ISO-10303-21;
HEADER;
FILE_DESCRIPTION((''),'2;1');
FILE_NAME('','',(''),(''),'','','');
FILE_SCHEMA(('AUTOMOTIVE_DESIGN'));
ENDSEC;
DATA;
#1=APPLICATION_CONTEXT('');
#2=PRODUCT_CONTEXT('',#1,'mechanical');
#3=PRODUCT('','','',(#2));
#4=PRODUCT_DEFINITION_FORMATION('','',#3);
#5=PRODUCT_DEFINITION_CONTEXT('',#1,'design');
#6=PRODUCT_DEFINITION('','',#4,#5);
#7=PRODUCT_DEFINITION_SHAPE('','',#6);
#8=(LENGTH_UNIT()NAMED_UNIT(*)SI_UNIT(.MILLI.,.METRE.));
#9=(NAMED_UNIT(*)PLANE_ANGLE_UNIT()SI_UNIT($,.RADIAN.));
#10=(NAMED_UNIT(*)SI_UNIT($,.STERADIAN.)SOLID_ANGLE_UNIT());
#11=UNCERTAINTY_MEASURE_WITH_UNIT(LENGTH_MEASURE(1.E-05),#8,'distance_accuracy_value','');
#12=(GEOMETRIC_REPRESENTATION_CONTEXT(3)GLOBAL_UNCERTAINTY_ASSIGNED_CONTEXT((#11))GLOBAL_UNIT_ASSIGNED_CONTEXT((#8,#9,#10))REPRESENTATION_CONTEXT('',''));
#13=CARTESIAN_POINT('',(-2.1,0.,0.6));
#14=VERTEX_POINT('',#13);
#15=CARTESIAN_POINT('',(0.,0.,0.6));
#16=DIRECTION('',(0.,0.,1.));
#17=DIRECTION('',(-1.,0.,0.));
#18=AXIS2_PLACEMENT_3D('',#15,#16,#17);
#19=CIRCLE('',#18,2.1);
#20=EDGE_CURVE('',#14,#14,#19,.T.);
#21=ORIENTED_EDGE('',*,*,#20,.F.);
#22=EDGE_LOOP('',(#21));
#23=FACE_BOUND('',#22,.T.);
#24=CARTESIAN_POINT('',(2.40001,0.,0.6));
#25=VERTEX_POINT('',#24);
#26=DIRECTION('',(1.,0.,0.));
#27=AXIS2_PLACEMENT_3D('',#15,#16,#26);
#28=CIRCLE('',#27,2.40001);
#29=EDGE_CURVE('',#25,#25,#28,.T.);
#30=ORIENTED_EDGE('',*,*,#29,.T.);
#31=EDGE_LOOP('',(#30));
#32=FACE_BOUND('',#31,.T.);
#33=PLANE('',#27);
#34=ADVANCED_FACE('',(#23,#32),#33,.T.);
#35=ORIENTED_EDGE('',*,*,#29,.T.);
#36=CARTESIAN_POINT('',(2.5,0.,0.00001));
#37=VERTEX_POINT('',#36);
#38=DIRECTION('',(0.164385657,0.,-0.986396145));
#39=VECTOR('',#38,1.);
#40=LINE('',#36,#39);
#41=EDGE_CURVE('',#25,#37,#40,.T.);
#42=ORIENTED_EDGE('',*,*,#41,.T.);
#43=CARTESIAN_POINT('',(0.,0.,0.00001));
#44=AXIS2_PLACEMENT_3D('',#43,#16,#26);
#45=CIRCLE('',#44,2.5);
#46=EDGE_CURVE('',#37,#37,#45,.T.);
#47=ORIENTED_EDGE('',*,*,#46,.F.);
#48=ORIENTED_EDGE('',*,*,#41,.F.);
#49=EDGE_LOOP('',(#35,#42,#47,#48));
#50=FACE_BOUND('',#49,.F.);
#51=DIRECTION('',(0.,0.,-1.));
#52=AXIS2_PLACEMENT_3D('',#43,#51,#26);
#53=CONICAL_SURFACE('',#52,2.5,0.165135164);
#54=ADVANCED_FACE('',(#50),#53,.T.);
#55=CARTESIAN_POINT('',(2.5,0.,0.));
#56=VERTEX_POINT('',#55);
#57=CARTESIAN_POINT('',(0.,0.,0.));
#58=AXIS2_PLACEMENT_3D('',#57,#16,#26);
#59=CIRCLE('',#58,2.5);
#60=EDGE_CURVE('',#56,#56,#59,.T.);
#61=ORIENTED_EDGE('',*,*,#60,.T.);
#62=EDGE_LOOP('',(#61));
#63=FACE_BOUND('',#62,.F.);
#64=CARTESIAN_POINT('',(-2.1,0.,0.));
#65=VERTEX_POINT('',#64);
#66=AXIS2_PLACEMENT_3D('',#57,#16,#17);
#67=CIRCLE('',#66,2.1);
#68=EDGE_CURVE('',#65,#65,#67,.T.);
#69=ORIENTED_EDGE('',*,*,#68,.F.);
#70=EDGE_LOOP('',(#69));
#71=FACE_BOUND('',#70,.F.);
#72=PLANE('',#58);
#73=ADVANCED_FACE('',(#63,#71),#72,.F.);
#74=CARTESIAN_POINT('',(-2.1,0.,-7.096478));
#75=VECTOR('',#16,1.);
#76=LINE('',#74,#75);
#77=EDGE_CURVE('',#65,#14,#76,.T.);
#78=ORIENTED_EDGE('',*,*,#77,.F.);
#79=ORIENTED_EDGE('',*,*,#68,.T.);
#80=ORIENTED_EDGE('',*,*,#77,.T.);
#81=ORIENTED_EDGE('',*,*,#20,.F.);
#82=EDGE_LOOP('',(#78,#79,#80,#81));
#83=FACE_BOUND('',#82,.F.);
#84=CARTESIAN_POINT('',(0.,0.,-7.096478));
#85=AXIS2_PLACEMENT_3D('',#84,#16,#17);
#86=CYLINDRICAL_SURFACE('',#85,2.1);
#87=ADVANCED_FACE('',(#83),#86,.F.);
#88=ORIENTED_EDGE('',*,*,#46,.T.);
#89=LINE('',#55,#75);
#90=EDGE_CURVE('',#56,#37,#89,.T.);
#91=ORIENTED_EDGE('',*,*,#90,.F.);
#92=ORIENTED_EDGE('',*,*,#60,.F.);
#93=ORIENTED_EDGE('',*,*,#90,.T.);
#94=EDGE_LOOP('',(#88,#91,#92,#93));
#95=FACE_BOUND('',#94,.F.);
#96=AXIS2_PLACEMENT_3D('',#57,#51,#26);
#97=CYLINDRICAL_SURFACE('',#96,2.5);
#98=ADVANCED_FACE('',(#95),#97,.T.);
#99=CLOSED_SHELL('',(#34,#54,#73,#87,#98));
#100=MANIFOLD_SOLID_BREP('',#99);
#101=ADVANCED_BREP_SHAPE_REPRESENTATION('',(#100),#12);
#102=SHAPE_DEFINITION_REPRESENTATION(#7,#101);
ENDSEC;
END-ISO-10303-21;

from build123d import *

# Parameters (mm, degrees)
F0_R     = 2.5
F1_DEPTH = 0.6
F2_D     = 4.2
F3_SIZE2 = 0.59999
F3_SIZE  = 0.09999


# Not quite as in the source:
# - a fillet or chamfer is up to 0.001 mm smaller than in the source, because OpenCascade refuses the exact size


with BuildPart() as f1:
    # F0 (on Top) → F1 (new body)
    with BuildSketch(Plane.XY):
        Circle(F0_R)
    extrude(amount=F1_DEPTH)

    # F2 (through all)
    with Locations(Plane(origin=(0, 0, 0), x_dir=(1, 0, 0), z_dir=(0, 0, -1))):
        with Locations((0, 0)):
            Hole(F2_D / 2)

    # F3 (size 0.1 and 0.6 in the source; OpenCascade refuses exactly that, so slightly less here)
    f3_edges = [f1.edges().sort_by_distance(p)[0] for p in [
        (-2.5, 0, 0.6),
    ]]
    f3_side = f1.faces().sort_by_distance((-2.429289, 0, 0.6))[0]
    chamfer(f3_edges, length=F3_SIZE, length2=F3_SIZE2, reference=f3_side)


solid = f1.part
